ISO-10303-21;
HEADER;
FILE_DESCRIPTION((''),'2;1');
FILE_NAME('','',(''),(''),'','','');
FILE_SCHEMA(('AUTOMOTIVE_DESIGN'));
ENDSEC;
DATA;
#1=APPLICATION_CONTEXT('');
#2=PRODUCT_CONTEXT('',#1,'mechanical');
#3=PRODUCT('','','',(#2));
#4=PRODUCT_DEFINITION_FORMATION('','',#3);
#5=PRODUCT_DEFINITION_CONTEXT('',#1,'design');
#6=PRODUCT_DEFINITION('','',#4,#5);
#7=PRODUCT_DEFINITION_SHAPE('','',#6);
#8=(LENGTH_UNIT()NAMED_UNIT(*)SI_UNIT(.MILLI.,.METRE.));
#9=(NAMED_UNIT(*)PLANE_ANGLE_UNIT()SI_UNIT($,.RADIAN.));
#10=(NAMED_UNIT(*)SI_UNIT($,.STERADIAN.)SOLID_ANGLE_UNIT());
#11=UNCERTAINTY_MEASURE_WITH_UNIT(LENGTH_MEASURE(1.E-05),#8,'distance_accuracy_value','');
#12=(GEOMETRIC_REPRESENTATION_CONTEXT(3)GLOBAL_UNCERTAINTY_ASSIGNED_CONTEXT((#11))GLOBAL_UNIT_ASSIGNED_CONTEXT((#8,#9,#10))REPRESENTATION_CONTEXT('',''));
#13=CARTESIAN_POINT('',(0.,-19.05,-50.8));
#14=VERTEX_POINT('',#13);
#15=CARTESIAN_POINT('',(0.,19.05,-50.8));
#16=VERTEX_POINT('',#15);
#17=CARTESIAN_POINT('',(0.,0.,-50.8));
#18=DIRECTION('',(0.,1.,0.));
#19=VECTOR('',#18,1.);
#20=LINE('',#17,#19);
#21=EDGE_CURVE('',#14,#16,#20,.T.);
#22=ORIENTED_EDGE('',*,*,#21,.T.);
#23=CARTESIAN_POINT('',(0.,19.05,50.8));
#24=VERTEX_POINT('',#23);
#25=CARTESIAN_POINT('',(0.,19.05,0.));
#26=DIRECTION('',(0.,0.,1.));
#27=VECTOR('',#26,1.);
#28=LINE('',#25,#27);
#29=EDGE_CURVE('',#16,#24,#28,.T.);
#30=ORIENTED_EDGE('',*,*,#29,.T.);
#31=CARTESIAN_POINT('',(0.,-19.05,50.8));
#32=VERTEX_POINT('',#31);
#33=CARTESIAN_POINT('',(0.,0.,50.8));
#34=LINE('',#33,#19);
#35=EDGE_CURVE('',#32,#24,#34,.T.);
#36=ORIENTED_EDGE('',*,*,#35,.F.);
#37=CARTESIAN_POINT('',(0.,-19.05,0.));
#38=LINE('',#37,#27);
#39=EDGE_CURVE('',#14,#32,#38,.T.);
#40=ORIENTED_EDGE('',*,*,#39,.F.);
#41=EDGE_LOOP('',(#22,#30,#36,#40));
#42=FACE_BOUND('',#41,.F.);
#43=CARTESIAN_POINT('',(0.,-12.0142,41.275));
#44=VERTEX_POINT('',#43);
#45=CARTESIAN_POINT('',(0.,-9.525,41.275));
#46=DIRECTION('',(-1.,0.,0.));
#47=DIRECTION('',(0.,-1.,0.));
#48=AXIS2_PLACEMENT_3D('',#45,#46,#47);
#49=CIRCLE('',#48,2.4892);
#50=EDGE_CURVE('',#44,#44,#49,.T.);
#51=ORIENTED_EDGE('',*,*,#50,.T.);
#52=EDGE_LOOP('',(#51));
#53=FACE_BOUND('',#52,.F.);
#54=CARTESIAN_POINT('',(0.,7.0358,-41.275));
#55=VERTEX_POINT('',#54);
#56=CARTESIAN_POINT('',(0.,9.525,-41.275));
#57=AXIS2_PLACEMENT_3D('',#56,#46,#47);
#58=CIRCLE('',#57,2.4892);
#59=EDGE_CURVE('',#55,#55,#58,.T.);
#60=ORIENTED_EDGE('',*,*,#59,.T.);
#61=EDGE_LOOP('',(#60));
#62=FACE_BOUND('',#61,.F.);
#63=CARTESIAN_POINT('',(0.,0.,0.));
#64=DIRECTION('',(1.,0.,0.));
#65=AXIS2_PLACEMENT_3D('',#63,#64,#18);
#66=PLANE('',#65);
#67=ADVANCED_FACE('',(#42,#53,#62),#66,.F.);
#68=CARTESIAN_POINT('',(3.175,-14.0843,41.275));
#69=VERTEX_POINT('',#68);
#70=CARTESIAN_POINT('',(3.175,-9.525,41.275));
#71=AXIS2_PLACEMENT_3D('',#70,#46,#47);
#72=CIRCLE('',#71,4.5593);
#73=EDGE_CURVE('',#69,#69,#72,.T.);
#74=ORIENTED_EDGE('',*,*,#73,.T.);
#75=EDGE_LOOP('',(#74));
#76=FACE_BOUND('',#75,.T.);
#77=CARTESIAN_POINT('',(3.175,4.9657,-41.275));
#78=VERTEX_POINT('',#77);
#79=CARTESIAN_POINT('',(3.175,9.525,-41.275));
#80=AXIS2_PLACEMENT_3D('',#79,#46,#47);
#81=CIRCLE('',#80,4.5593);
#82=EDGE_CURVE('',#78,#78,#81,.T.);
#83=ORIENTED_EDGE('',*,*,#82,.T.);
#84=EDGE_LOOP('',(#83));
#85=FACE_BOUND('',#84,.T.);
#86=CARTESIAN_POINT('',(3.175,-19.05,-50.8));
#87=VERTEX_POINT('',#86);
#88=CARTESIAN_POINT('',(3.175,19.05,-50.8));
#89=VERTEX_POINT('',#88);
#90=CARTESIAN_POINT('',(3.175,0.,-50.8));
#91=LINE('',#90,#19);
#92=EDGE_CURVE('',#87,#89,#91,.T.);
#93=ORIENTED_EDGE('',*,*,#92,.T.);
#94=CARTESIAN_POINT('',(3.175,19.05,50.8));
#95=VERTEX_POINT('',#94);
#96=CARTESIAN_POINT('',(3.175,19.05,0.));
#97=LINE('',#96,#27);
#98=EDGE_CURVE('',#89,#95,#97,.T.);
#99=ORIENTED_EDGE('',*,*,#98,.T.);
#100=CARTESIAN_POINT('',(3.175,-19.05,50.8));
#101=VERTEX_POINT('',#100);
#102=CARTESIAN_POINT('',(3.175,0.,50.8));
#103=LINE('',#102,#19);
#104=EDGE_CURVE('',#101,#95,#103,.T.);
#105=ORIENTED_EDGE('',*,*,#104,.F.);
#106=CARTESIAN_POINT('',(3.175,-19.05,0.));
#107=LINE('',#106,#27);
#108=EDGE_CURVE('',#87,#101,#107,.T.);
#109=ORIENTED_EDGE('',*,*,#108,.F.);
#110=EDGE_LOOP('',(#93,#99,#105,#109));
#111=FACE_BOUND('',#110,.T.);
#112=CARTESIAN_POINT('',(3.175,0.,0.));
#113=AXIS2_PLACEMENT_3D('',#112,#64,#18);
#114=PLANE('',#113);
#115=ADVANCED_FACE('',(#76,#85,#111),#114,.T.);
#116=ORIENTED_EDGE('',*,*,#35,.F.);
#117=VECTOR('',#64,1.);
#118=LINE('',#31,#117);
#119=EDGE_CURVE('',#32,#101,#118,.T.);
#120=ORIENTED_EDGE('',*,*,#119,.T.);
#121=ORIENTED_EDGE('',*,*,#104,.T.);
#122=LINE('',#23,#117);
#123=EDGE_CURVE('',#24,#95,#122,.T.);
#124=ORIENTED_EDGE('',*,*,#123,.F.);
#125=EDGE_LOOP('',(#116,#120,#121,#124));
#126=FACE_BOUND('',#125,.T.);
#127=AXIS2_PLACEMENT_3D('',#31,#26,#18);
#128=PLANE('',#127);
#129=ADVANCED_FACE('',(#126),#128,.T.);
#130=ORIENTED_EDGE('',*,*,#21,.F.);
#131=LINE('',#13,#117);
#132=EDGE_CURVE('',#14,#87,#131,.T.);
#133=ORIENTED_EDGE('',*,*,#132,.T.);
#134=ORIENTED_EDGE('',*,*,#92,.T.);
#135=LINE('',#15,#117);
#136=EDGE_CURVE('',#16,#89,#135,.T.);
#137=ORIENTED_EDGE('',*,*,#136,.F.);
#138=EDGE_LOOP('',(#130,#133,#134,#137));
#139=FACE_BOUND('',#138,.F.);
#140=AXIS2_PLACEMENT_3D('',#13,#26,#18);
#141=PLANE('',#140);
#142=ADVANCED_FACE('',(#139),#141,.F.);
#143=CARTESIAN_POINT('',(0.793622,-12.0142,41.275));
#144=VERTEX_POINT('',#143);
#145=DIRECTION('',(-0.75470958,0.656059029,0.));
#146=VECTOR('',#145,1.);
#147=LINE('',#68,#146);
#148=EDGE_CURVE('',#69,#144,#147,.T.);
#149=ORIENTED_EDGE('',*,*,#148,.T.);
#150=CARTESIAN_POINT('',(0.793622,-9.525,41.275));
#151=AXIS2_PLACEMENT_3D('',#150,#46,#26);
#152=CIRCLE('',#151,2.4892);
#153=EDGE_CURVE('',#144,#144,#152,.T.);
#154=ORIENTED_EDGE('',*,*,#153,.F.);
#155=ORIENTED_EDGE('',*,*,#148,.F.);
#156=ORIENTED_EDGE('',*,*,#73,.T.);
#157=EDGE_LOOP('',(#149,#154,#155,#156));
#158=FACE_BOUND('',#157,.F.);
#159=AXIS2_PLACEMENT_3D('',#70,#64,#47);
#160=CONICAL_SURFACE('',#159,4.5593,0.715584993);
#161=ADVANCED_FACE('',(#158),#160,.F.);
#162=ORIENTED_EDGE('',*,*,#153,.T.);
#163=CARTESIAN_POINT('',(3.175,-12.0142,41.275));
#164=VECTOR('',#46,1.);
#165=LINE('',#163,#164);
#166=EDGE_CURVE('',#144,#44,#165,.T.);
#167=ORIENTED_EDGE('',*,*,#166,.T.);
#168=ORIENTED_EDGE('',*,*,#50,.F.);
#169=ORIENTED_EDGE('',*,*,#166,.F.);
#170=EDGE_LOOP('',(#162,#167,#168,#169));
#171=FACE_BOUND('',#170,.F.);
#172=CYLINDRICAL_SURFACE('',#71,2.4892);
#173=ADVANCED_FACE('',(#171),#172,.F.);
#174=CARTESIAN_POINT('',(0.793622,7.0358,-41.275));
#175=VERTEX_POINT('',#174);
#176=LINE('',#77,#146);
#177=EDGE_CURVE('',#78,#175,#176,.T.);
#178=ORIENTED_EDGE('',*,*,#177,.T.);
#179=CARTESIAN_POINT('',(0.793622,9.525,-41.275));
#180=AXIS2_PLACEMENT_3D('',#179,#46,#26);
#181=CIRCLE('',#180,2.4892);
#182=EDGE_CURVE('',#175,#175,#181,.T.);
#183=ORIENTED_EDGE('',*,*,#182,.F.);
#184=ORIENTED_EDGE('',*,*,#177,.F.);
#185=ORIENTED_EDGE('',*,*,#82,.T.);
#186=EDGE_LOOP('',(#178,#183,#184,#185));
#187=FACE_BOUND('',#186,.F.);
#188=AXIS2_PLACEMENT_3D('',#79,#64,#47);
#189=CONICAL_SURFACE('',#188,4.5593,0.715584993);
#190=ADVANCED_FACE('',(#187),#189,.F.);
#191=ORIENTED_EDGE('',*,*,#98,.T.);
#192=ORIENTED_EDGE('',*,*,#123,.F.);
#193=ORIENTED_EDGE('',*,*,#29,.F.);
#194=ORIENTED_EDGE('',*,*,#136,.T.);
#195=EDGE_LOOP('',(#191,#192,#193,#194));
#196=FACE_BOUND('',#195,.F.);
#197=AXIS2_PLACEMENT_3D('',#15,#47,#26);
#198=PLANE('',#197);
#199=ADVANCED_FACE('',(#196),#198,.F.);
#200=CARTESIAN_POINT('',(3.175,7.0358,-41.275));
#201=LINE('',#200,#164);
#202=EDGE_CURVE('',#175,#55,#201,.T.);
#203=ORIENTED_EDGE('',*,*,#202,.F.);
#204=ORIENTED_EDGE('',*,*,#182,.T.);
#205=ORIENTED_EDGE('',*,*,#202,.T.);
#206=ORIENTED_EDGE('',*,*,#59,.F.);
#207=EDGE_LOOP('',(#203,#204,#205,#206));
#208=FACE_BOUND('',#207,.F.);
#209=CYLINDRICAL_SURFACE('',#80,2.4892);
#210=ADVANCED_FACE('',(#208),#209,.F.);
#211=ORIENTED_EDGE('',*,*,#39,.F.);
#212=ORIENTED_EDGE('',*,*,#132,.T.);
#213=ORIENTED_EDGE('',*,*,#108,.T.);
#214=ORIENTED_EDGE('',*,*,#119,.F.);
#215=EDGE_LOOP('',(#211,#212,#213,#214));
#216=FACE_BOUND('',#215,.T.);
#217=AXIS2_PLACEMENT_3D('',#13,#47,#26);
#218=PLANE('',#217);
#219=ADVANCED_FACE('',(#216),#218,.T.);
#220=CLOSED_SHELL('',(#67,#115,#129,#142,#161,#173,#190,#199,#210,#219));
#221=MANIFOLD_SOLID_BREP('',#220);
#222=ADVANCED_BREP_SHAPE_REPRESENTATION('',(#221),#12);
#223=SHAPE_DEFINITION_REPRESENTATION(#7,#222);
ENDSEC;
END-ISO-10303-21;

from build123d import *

# Parameters (mm, degrees)
F0_W           = 38.1
F0_H           = 101.6
F1_DEPTH       = 3.175
F3_D           = 4.9784
F3_CSINK_D     = 9.1186
F3_CSINK_ANGLE = 82


# Not quite as in the source:
# - a feature names something its author has since deleted; it is built from what else it names


with BuildPart() as f1:
    # F0 (on Right) → F1 (new body)
    with BuildSketch(Plane.YZ):
        Rectangle(F0_W, F0_H)
    extrude(amount=F1_DEPTH)

    # F3 (through all)
    with Locations(Plane.YZ.offset(3.175)):
        with Locations((-9.525, 41.275), (9.525, -41.275)):
            CounterSinkHole(F3_D / 2, F3_CSINK_D / 2, counter_sink_angle=F3_CSINK_ANGLE)


solid = f1.part
